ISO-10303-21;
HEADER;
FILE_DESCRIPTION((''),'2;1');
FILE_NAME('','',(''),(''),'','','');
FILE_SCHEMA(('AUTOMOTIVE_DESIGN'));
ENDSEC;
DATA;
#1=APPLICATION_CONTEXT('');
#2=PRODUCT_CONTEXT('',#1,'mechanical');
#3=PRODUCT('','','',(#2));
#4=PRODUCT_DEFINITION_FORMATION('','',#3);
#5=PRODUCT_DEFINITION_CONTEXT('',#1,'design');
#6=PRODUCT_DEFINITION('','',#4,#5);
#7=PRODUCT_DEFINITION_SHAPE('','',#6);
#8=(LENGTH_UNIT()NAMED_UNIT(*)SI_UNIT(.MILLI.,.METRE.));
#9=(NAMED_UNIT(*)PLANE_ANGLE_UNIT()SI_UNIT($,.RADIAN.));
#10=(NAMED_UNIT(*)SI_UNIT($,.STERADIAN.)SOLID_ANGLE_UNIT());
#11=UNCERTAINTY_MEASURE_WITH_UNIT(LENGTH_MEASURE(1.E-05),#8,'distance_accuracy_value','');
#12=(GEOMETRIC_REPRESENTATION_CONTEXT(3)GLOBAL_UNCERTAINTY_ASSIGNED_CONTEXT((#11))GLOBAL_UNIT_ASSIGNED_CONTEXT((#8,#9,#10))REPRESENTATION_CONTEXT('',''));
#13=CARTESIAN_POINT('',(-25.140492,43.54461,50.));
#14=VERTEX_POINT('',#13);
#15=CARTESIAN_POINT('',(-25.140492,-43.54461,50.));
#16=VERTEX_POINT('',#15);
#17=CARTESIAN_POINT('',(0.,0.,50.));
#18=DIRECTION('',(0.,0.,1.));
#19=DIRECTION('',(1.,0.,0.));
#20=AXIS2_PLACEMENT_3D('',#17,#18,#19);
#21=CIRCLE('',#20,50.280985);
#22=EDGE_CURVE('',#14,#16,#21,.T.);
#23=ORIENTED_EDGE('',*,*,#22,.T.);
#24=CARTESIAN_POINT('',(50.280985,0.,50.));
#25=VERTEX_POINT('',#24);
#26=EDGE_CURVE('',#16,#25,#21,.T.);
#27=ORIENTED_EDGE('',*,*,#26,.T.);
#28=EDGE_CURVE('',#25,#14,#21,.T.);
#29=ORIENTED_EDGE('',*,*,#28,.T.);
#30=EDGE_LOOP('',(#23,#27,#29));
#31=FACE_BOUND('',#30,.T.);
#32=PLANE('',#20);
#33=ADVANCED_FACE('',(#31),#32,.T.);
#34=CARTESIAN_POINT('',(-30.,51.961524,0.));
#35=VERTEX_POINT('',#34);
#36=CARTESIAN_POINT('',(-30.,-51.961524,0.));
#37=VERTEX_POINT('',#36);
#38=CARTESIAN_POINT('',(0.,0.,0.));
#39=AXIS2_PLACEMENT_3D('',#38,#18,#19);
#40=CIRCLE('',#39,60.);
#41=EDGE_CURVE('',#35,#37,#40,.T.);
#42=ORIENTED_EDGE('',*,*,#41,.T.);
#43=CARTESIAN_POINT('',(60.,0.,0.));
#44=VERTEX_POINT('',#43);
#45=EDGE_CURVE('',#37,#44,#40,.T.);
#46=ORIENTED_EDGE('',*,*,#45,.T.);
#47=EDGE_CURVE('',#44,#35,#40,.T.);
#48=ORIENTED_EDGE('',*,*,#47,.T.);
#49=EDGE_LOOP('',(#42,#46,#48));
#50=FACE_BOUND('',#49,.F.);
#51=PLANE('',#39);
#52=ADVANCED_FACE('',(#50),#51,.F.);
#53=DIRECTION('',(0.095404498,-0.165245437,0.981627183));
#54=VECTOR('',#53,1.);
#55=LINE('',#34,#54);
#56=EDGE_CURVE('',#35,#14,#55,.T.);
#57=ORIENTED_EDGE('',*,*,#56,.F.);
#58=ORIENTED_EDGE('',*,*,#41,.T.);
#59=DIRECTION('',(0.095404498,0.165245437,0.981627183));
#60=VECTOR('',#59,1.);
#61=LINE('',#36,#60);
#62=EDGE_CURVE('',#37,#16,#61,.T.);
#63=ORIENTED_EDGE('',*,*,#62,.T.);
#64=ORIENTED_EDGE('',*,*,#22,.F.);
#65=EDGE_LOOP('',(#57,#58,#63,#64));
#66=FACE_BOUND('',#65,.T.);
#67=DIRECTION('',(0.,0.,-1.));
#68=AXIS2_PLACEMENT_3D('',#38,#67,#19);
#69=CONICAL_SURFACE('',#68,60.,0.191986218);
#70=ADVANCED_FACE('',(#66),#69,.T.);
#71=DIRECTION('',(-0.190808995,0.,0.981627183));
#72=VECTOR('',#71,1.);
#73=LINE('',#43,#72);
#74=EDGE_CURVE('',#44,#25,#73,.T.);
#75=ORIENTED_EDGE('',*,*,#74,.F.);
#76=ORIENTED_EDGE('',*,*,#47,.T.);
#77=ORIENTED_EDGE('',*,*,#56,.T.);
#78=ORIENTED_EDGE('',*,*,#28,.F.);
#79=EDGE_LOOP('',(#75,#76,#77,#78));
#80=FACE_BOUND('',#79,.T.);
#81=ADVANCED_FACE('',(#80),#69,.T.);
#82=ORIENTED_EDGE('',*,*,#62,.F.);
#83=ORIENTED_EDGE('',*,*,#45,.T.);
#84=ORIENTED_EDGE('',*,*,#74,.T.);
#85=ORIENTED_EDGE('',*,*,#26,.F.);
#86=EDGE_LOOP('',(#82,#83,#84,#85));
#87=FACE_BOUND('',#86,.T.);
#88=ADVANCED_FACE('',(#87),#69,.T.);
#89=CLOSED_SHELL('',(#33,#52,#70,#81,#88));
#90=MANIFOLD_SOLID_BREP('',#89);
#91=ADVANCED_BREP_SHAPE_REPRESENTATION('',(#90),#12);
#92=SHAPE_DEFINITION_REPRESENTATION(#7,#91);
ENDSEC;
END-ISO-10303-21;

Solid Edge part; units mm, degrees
sketch "Sketch1" plane through (0, 0, 0) normal (0, 0, 1) x (1, 0, 0)
  circle A0 centre (0, 0) radius 60
extrude "Ajout_matière_1" add sketch "Sketch1" along normal blind 50 draft 11
